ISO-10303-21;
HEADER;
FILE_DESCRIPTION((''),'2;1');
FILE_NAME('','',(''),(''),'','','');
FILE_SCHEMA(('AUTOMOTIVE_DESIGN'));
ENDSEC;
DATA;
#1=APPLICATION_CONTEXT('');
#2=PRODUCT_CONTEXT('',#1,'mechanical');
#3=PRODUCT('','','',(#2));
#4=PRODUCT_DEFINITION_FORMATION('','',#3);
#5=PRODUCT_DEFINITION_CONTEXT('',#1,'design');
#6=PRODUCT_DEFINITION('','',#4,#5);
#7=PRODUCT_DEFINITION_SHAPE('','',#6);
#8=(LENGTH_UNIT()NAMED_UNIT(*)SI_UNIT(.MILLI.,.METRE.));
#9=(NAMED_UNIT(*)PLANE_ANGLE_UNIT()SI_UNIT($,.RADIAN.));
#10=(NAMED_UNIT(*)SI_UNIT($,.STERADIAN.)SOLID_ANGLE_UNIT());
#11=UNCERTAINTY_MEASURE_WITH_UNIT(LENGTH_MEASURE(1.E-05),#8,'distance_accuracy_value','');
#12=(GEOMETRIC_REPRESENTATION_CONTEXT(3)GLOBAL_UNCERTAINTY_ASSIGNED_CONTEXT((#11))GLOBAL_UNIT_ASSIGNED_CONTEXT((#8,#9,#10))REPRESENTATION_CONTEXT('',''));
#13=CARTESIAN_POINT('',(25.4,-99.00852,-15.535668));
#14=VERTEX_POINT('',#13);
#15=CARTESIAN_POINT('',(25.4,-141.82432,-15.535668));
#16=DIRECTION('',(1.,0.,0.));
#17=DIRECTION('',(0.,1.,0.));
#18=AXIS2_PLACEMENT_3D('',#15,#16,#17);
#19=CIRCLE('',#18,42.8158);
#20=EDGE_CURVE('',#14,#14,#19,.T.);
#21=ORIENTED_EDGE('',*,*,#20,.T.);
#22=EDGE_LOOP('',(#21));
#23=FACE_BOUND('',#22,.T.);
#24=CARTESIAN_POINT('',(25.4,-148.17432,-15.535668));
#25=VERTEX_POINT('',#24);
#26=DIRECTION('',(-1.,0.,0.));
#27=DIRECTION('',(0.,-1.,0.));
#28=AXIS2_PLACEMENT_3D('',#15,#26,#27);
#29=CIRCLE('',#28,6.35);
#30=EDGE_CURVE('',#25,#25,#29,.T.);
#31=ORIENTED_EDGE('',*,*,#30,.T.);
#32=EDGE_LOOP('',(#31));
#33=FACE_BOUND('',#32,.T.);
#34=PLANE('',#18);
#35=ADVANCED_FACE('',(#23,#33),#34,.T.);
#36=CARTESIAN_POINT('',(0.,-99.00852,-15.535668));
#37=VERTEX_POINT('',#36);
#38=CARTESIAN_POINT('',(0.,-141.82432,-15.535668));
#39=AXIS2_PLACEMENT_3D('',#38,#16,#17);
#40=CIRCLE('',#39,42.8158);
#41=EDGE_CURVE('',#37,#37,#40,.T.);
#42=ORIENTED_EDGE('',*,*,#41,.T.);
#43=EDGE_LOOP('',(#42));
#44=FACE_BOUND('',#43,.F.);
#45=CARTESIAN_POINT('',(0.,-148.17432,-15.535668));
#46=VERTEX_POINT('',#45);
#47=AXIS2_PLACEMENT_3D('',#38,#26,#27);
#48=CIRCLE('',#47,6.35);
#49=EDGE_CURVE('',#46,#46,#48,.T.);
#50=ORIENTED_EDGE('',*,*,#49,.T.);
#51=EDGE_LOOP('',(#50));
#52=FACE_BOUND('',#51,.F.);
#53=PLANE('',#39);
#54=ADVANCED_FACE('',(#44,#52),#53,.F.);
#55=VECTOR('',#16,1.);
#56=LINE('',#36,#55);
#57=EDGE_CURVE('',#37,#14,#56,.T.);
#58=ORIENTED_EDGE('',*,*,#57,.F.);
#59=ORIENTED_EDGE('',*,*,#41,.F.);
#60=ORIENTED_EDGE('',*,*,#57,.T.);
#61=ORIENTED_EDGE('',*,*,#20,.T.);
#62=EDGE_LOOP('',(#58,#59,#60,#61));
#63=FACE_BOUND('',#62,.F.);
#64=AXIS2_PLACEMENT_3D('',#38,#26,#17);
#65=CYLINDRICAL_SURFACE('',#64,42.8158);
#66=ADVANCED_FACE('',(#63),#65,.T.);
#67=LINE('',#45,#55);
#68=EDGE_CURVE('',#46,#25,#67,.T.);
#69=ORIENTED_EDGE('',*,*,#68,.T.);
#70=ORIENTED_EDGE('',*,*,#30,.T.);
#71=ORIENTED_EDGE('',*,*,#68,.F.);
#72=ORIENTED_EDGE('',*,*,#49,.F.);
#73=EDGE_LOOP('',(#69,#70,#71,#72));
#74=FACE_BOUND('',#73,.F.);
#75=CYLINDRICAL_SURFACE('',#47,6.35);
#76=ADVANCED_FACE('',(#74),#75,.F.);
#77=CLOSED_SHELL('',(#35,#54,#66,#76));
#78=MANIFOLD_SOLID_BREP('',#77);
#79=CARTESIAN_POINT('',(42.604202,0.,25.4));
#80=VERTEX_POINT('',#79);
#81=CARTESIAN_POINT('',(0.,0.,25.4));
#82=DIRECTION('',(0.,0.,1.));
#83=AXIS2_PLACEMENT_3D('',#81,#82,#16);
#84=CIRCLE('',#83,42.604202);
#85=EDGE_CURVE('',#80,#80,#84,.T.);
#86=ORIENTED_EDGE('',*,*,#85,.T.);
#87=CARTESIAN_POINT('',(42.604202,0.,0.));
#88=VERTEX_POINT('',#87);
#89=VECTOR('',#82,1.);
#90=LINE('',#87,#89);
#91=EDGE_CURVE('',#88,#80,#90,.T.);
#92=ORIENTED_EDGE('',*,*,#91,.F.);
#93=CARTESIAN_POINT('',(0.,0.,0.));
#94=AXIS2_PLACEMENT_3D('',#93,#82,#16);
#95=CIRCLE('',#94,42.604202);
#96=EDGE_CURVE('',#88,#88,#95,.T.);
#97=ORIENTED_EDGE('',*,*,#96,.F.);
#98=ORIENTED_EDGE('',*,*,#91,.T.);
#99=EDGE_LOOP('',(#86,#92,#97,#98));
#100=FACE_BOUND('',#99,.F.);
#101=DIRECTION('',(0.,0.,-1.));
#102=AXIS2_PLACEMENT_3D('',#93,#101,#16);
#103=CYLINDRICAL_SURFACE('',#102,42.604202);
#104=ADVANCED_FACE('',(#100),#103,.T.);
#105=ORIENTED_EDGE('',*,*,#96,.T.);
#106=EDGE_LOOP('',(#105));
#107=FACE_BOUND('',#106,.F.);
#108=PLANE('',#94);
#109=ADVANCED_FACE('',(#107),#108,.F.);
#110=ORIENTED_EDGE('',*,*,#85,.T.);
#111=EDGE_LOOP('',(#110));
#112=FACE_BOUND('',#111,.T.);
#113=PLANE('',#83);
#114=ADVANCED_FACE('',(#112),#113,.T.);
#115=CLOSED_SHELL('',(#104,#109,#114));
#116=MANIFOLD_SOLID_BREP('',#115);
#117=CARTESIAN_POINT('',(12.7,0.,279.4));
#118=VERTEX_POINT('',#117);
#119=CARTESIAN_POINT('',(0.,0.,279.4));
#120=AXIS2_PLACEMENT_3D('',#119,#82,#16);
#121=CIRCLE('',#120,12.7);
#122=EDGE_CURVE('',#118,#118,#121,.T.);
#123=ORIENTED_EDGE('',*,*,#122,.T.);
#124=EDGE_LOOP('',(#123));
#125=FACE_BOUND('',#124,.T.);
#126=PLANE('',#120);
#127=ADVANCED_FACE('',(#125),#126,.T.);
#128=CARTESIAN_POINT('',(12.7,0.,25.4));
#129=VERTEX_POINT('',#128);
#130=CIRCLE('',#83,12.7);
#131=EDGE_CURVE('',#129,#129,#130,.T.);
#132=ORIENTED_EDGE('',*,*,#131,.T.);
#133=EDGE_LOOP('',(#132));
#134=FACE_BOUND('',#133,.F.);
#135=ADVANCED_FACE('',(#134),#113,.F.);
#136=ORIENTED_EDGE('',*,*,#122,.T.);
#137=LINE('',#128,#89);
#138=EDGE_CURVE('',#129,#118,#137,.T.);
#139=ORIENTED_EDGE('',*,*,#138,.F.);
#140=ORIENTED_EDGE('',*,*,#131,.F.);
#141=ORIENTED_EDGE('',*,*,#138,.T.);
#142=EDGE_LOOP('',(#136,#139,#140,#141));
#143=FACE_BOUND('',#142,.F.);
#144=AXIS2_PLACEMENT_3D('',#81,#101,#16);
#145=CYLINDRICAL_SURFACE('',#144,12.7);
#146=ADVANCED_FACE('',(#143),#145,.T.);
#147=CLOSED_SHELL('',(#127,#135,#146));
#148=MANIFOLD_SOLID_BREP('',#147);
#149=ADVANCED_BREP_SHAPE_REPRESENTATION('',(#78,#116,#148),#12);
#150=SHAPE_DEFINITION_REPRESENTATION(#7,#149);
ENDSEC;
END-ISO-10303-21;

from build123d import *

# Parameters (mm, degrees)
F0_R     = 42.6042021987
F1_DEPTH = 25.4
F2_R     = 42.8158000792
F3_DEPTH = 25.4
F4_R     = 12.7
F5_DEPTH = 254
F6_R     = 6.35
F7_DEPTH = 25.4


with BuildPart() as f1:
    # F0 (on Top) → F1 (new body)
    with BuildSketch(Plane.XY):
        Circle(F0_R)
    extrude(amount=F1_DEPTH)


with BuildPart() as f3:
    # F2 (on Right) → F3 (new body)
    with BuildSketch(Plane.YZ):
        with Locations((-141.8243199587, -15.5356675386)):
            Circle(F2_R)
    extrude(amount=F3_DEPTH)

    # F6 (on face) → F7 (cut)
    with BuildSketch(Plane(origin=(0, 0, 0), x_dir=(0, -1, 0), z_dir=(-1, 0, 0))):
        with Locations((141.8243199587, -15.5356675386)):
            Circle(F6_R)
    extrude(amount=-F7_DEPTH, mode=Mode.SUBTRACT)


with BuildPart() as f5:
    # F4 (on face) → F5 (new body)
    with BuildSketch(Plane.XY.offset(25.4)):
        Circle(F4_R)
    extrude(amount=F5_DEPTH)


solid = Compound([f1.part, f3.part, f5.part])
